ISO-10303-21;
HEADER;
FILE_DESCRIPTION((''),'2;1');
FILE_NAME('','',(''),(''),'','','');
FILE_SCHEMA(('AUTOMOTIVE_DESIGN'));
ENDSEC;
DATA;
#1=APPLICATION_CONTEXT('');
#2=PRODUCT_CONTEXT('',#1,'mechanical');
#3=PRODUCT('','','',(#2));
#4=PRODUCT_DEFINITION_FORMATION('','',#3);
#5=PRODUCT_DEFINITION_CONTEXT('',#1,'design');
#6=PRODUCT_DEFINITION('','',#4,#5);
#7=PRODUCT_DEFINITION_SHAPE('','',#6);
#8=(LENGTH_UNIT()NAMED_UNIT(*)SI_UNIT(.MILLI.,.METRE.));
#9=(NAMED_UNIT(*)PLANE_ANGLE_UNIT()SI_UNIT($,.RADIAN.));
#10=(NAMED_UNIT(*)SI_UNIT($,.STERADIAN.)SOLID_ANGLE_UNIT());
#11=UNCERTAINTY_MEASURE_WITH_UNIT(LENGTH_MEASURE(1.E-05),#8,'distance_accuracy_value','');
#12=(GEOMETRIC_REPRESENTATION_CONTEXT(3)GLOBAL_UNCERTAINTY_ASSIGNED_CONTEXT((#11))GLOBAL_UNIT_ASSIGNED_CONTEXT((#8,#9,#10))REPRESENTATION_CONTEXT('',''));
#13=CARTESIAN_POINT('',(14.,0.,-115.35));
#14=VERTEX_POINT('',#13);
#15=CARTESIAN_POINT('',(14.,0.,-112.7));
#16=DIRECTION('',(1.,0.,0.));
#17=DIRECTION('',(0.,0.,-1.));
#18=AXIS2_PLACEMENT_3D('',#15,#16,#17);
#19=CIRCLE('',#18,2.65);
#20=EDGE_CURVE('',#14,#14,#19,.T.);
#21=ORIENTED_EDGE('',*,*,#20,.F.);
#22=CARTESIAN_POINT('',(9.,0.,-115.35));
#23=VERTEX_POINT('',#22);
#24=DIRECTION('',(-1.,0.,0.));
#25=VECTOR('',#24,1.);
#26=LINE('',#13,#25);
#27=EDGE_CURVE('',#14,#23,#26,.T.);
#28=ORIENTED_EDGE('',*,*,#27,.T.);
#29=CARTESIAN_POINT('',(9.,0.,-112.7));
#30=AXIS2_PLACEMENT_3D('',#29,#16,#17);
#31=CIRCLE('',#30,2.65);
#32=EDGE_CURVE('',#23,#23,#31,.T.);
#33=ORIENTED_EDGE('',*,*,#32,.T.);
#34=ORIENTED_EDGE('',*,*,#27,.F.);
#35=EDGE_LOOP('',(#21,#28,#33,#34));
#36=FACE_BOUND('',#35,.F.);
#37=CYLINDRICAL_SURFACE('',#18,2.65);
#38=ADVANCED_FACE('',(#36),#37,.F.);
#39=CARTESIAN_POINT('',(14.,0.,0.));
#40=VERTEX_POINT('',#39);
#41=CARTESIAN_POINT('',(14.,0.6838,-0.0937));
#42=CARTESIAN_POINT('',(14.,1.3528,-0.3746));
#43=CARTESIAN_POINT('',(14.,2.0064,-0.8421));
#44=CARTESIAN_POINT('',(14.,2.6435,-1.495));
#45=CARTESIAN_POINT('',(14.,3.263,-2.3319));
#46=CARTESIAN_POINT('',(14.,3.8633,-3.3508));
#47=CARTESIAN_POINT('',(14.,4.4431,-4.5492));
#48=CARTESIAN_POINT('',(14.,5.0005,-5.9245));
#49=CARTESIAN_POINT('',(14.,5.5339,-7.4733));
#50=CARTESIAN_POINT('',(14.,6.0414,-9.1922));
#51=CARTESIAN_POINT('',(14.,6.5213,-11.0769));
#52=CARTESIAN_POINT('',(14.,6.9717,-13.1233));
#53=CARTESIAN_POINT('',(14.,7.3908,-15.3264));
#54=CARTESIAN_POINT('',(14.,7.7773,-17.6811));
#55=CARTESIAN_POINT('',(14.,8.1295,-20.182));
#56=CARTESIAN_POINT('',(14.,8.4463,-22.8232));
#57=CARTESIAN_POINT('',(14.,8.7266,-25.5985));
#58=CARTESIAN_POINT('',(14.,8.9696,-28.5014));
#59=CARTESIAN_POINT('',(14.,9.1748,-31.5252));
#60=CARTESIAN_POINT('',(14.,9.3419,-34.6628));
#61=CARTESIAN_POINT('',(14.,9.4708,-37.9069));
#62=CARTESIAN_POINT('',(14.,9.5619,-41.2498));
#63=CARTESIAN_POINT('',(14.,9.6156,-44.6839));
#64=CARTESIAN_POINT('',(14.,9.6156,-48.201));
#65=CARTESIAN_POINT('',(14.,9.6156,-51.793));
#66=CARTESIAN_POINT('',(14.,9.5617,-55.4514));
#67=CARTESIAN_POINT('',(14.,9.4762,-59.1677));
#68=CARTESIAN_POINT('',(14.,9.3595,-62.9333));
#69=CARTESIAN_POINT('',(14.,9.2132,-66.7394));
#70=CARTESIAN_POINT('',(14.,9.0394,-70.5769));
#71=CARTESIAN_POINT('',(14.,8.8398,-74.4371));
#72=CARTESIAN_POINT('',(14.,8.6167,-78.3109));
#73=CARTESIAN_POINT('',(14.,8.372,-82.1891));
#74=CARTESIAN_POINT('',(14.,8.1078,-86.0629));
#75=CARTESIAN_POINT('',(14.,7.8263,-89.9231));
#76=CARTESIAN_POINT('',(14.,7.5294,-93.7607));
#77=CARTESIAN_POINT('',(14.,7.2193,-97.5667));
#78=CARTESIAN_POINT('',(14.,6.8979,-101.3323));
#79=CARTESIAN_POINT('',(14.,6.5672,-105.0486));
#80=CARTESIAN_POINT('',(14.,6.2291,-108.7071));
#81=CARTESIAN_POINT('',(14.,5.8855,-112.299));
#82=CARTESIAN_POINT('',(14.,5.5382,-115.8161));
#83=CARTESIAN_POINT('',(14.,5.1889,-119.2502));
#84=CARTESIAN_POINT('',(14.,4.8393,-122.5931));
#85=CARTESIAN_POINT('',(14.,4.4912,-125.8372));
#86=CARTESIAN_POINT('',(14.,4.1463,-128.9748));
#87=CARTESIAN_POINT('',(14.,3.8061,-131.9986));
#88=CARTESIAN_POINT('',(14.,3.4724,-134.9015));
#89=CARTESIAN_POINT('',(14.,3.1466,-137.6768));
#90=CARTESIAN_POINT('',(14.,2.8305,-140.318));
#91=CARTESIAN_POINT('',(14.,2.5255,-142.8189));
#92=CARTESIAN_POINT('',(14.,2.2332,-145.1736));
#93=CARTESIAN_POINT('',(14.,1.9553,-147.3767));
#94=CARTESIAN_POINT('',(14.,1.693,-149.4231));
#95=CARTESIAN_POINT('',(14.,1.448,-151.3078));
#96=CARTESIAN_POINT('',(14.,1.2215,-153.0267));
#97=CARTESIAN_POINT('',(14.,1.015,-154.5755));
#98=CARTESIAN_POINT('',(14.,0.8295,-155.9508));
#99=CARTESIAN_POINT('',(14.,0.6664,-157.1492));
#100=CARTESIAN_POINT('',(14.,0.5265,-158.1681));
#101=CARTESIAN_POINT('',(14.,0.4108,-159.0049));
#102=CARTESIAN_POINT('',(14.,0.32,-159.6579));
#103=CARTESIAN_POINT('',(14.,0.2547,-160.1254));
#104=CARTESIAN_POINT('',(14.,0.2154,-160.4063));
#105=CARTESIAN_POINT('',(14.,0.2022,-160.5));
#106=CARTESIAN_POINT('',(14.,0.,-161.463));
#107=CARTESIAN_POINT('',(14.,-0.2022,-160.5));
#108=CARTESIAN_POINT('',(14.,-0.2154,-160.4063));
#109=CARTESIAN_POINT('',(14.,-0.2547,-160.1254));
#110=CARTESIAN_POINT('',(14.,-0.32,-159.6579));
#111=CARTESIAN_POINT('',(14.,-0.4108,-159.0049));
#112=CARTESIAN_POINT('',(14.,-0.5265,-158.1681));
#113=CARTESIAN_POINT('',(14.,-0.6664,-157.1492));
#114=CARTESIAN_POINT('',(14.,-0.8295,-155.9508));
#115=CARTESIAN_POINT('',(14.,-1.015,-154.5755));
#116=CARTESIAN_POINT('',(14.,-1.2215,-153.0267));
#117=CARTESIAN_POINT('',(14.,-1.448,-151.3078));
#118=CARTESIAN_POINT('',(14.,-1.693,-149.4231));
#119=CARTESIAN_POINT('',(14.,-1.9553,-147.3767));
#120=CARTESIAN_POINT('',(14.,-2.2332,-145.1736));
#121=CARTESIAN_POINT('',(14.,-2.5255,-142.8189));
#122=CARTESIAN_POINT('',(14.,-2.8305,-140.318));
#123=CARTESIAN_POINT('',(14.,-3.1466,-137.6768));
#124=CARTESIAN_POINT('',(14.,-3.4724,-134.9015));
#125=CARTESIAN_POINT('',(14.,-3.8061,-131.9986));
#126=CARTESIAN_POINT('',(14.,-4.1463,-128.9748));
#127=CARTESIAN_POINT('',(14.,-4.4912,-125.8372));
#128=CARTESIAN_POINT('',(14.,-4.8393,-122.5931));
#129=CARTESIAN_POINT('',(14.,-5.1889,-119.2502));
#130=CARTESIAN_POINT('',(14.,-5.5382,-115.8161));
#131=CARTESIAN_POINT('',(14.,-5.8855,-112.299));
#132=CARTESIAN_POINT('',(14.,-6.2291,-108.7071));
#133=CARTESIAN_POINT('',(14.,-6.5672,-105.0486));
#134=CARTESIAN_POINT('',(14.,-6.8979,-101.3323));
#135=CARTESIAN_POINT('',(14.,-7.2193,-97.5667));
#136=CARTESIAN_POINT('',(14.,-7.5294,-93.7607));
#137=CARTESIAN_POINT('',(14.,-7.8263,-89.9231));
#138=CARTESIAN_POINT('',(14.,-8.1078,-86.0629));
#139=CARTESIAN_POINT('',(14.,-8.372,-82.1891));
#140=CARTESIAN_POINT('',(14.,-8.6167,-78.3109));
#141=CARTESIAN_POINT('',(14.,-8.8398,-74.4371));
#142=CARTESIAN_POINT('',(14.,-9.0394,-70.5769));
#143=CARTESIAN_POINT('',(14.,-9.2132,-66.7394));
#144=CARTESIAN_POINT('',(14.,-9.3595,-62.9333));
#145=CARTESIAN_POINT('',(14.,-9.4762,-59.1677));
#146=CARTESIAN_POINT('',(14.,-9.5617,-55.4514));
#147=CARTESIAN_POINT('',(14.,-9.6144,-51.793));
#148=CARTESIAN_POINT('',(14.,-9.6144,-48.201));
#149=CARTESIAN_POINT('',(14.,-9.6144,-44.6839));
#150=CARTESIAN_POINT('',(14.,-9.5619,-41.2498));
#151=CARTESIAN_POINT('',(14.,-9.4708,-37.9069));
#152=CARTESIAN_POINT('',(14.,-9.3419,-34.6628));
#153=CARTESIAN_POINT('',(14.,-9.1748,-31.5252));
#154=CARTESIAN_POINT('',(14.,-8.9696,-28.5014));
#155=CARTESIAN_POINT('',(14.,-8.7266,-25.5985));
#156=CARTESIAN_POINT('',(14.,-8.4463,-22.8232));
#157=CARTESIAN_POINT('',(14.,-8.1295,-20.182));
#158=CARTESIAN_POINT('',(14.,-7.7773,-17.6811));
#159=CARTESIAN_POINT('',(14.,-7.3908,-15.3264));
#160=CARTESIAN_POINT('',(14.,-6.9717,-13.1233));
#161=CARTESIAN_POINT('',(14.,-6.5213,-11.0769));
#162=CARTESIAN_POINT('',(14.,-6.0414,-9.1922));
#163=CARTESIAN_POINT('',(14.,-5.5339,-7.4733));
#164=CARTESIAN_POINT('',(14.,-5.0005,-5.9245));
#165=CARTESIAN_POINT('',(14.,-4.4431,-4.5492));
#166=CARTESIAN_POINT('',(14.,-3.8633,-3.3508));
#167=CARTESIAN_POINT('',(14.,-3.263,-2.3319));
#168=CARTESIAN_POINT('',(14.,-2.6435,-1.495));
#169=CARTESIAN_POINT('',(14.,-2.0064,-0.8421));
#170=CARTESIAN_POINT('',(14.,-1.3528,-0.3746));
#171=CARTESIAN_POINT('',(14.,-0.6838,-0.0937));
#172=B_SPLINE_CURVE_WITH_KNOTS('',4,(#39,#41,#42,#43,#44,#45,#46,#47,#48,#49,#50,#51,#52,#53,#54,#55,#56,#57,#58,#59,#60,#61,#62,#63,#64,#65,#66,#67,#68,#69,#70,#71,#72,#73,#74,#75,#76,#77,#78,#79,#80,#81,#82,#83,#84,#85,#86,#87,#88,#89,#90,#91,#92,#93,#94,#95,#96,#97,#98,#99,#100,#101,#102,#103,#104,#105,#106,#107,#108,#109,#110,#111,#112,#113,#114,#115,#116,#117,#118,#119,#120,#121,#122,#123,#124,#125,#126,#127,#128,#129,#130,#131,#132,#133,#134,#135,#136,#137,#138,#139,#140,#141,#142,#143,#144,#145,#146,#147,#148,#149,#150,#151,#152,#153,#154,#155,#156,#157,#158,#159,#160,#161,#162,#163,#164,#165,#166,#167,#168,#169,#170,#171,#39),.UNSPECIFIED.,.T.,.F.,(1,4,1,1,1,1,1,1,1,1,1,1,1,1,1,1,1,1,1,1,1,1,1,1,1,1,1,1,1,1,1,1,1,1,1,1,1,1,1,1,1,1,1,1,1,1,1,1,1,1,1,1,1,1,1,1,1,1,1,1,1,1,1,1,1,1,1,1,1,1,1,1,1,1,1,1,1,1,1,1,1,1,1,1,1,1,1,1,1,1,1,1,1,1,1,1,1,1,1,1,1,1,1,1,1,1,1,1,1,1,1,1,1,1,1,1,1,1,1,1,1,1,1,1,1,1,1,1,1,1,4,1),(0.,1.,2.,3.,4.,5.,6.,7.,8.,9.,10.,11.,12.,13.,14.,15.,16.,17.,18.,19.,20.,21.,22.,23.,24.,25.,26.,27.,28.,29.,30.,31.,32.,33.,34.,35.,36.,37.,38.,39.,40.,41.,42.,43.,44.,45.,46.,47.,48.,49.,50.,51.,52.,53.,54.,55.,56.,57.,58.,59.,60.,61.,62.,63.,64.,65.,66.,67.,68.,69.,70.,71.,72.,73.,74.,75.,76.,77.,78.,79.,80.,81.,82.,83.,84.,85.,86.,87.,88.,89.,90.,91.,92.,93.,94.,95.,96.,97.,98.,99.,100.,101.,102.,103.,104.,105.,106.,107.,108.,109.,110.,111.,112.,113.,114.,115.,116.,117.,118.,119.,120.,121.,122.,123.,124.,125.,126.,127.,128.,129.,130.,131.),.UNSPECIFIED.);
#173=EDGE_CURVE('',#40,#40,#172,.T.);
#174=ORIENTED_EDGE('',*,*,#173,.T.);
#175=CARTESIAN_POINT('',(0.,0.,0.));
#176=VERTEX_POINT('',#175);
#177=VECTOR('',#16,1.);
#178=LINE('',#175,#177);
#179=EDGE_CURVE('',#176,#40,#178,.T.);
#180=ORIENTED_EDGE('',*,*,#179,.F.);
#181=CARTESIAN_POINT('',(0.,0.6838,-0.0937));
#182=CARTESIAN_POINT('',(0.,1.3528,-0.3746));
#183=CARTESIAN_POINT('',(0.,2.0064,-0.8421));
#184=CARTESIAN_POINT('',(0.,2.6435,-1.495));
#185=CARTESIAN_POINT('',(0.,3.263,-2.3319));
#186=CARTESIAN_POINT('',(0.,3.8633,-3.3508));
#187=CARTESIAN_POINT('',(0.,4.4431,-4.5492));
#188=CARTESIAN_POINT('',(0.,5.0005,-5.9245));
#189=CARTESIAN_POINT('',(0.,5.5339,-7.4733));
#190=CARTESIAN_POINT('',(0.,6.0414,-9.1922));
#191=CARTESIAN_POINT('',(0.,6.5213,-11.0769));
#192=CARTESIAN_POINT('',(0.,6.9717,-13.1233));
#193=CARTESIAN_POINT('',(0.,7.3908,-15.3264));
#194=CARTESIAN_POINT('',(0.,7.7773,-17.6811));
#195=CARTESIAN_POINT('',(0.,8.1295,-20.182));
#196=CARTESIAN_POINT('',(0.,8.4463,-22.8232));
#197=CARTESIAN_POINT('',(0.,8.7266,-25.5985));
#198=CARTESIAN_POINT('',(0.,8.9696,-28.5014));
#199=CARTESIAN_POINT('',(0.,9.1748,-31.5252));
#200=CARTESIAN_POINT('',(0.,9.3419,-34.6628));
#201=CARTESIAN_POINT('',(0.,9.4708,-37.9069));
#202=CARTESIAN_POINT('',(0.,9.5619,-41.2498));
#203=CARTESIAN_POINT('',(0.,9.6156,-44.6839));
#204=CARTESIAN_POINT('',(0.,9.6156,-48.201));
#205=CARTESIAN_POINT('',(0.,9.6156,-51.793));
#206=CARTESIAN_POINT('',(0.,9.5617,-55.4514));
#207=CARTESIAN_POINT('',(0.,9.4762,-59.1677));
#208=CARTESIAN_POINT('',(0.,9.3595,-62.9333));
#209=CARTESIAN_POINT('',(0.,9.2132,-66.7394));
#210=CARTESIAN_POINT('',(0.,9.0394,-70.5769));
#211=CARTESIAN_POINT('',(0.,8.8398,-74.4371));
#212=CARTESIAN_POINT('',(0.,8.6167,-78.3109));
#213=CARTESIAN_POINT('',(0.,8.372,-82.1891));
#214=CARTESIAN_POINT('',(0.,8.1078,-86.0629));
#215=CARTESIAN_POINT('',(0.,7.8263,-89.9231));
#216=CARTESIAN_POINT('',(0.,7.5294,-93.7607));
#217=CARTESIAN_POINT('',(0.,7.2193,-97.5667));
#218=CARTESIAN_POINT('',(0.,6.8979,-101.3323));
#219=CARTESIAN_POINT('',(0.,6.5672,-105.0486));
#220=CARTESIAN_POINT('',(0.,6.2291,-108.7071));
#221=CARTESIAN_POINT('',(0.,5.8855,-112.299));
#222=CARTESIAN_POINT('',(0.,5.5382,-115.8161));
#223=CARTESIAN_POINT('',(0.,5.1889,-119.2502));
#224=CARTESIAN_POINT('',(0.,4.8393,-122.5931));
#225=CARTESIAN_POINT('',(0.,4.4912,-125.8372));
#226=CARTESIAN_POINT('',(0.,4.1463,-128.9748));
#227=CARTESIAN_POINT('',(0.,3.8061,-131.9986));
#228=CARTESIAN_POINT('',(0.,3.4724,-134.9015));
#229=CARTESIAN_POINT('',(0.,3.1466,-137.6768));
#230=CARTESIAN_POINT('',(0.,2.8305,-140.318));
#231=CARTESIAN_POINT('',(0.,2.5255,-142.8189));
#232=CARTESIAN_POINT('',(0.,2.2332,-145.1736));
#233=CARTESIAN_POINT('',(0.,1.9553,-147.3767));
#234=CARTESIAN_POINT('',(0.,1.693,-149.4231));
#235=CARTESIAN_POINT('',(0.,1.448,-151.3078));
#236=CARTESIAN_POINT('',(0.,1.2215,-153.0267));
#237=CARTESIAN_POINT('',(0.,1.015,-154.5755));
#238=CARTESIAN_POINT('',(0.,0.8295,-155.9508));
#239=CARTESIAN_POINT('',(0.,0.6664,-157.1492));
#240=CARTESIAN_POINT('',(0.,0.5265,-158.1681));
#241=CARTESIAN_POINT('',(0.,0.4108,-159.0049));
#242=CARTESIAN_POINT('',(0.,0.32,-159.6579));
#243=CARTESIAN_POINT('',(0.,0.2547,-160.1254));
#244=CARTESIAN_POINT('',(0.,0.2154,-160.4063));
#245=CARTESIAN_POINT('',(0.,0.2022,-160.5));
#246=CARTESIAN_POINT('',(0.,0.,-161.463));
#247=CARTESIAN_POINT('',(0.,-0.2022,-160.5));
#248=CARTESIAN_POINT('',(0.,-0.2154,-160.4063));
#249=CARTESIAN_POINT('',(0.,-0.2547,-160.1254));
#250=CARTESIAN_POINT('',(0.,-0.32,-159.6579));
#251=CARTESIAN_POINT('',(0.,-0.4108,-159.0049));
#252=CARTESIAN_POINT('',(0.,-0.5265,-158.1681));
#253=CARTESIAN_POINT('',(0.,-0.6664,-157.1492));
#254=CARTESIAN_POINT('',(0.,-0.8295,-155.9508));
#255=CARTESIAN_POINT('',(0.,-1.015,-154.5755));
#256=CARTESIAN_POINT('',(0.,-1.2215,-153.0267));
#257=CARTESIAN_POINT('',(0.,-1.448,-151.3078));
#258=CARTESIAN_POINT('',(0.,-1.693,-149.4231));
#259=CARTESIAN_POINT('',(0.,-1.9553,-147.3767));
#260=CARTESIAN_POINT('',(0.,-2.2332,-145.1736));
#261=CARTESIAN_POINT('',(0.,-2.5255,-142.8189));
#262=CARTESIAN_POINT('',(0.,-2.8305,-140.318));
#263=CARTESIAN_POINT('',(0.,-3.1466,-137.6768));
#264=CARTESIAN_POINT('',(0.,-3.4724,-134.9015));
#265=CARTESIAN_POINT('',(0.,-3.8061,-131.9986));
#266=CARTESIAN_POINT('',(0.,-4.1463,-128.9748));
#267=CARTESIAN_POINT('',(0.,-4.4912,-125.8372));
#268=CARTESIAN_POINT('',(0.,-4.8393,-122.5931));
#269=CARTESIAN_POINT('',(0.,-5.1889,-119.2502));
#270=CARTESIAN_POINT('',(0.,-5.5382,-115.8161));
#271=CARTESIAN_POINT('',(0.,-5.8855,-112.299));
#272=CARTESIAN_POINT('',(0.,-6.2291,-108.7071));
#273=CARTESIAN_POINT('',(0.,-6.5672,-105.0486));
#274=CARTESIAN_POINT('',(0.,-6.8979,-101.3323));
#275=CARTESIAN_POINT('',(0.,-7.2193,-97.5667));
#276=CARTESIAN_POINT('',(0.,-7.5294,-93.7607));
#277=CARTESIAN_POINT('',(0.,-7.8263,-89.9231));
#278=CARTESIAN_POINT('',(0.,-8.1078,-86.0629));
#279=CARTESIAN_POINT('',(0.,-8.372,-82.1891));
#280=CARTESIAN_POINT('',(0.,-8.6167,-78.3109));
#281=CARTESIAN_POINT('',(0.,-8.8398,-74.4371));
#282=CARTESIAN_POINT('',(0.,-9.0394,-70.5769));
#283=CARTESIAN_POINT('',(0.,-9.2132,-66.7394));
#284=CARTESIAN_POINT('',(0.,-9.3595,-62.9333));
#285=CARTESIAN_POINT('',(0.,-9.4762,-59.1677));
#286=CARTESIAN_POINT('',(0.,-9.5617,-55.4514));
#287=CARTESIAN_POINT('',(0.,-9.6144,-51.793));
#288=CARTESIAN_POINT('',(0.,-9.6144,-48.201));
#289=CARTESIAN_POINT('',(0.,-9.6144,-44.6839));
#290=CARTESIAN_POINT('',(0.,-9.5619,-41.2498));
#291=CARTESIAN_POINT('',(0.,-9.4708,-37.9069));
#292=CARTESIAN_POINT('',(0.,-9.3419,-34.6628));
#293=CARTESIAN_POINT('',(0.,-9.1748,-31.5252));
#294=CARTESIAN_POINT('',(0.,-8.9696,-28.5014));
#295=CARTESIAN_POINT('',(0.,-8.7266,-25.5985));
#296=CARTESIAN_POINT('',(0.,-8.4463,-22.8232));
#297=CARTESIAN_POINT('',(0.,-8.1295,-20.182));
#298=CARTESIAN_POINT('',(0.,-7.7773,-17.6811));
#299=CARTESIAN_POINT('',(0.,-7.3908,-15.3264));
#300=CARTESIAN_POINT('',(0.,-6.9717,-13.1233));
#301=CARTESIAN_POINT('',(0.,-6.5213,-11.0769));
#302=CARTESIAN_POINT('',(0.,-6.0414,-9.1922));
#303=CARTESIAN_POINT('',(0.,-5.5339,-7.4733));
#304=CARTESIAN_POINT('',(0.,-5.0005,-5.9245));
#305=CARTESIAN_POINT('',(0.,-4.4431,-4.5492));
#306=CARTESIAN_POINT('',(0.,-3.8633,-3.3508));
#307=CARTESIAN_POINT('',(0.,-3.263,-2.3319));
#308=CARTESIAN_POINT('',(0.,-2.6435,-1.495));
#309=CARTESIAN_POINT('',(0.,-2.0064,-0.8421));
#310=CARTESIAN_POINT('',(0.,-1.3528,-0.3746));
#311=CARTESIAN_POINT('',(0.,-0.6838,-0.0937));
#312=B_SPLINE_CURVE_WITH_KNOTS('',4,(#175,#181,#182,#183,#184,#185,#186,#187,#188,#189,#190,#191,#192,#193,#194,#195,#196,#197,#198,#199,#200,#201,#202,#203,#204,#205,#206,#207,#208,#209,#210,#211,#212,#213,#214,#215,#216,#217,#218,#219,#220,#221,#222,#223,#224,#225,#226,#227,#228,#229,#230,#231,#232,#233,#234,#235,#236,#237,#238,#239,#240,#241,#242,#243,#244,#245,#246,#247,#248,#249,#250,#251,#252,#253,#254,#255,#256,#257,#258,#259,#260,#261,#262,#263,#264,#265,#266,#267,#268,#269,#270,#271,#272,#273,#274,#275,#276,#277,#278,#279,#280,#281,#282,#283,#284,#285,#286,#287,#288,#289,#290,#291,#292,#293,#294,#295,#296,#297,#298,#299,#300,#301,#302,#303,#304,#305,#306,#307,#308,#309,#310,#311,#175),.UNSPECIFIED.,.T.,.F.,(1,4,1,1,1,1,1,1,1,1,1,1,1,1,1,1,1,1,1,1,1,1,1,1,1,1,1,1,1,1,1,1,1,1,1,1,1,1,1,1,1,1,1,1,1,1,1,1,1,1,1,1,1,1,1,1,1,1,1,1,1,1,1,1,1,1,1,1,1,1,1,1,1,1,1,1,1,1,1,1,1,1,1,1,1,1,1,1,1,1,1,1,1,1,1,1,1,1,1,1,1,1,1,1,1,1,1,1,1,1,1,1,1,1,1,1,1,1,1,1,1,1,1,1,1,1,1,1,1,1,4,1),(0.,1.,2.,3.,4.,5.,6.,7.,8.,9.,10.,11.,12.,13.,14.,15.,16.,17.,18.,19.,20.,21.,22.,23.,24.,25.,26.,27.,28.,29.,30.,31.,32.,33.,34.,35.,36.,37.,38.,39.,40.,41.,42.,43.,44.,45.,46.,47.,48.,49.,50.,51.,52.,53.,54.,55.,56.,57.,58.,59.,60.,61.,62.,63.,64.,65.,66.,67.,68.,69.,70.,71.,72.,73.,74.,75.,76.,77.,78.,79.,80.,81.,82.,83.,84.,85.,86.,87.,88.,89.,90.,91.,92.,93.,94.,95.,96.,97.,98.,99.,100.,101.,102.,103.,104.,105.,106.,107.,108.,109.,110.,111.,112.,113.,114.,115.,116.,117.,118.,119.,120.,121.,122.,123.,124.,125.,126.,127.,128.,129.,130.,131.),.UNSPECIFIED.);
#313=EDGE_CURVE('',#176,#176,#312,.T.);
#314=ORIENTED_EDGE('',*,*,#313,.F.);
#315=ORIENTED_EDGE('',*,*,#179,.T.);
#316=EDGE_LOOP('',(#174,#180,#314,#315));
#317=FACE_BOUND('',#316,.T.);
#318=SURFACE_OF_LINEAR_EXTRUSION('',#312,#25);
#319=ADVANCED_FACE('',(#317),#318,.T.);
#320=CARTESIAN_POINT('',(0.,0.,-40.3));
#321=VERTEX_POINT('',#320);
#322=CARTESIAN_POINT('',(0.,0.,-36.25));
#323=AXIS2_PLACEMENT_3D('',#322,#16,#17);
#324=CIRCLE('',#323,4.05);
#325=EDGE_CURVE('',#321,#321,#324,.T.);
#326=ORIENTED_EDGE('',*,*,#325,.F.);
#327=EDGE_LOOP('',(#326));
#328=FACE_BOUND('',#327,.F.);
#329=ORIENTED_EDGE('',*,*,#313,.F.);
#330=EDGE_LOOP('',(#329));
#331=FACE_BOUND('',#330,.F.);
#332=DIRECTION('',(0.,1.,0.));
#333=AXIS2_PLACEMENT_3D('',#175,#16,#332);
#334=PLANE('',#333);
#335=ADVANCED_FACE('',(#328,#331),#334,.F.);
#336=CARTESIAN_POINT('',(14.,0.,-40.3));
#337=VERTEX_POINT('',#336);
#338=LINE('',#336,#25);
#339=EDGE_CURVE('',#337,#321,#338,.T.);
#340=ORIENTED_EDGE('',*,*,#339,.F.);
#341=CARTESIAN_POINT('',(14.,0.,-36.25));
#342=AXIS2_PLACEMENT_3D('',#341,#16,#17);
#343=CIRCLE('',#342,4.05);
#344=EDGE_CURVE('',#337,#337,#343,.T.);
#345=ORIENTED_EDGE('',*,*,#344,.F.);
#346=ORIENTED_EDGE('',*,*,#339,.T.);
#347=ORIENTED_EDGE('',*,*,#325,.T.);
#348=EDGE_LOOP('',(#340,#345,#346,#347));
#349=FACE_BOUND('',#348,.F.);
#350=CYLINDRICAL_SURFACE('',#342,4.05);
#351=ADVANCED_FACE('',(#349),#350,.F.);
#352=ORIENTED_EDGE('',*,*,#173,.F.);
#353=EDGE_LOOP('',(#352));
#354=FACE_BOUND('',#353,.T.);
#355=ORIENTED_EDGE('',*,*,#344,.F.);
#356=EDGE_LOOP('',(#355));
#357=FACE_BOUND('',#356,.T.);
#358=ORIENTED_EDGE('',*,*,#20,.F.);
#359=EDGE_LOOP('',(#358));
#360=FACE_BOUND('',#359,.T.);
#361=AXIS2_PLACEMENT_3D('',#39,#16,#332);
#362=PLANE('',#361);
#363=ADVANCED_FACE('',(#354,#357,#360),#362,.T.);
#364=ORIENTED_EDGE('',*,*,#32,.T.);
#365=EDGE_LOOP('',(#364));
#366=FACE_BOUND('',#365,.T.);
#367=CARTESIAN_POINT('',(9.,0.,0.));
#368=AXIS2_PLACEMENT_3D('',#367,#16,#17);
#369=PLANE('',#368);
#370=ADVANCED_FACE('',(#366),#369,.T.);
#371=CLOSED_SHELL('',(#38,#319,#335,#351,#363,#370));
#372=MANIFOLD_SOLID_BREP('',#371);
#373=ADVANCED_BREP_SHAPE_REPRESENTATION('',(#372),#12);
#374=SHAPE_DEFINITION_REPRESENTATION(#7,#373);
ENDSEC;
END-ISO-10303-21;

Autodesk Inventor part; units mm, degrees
ref_plane "YZ Plane" through (0, 0, 0) normal (1, 0, 0) x (0, 1, 0)
ref_plane "XZ Plane" through (0, 0, 0) normal (0, 1, 0) x (-1, 0, 0)
ref_plane "XY Plane" through (0, 0, 0) normal (0, 0, 1) x (1, 0, 0)
sketch "Sketch9" plane through (0, 0, 0) normal (1, 0, 0) x (0, 1, 0)
  line L0 (0, 0) -> (0.6838, -0.0937) construction
  line L1 (0.6838, -0.0937) -> (1.3528, -0.3746) construction
  line L2 (1.3528, -0.3746) -> (2.0064, -0.8421) construction
  line L3 (2.0064, -0.8421) -> (2.6435, -1.495) construction
  line L4 (2.6435, -1.495) -> (3.263, -2.3319) construction
  line L5 (3.263, -2.3319) -> (3.8633, -3.3508) construction
  line L6 (3.8633, -3.3508) -> (4.4431, -4.5492) construction
  line L7 (4.4431, -4.5492) -> (5.0005, -5.9245) construction
  line L8 (5.0005, -5.9245) -> (5.5339, -7.4733) construction
  line L9 (5.5339, -7.4733) -> (6.0414, -9.1922) construction
  line L10 (6.0414, -9.1922) -> (6.5213, -11.0769) construction
  line L11 (6.5213, -11.0769) -> (6.9717, -13.1233) construction
  line L12 (6.9717, -13.1233) -> (7.3908, -15.3264) construction
  line L13 (7.3908, -15.3264) -> (7.7773, -17.6811) construction
  line L14 (7.7773, -17.6811) -> (8.1295, -20.182) construction
  line L15 (8.1295, -20.182) -> (8.4463, -22.8232) construction
  line L16 (8.4463, -22.8232) -> (8.7266, -25.5985) construction
  line L17 (8.7266, -25.5985) -> (8.9696, -28.5014) construction
  line L18 (8.9696, -28.5014) -> (9.1748, -31.5252) construction
  line L19 (9.1748, -31.5252) -> (9.3419, -34.6628) construction
  line L20 (9.3419, -34.6628) -> (9.4708, -37.9069) construction
  line L21 (9.4708, -37.9069) -> (9.5619, -41.2498) construction
  line L22 (9.5619, -41.2498) -> (9.6156, -44.6839) construction
  line L23 (9.6156, -44.6839) -> (9.6156, -48.201) construction
  line L24 (9.6156, -48.201) -> (9.6156, -51.793) construction
  line L25 (9.6156, -51.793) -> (9.5617, -55.4514) construction
  line L26 (9.5617, -55.4514) -> (9.4762, -59.1677) construction
  line L27 (9.4762, -59.1677) -> (9.3595, -62.9333) construction
  line L28 (9.3595, -62.9333) -> (9.2132, -66.7394) construction
  line L29 (9.2132, -66.7394) -> (9.0394, -70.5769) construction
  line L30 (9.0394, -70.5769) -> (8.8398, -74.4371) construction
  line L31 (8.8398, -74.4371) -> (8.6167, -78.3109) construction
  line L32 (8.6167, -78.3109) -> (8.372, -82.1891) construction
  line L33 (8.372, -82.1891) -> (8.1078, -86.0629) construction
  line L34 (8.1078, -86.0629) -> (7.8263, -89.9231) construction
  line L35 (7.8263, -89.9231) -> (7.5294, -93.7607) construction
  line L36 (7.5294, -93.7607) -> (7.2193, -97.5667) construction
  line L37 (7.2193, -97.5667) -> (6.8979, -101.3323) construction
  line L38 (6.8979, -101.3323) -> (6.5672, -105.0486) construction
  line L39 (6.5672, -105.0486) -> (6.2291, -108.7071) construction
  line L40 (6.2291, -108.7071) -> (5.8855, -112.299) construction
  line L41 (5.8855, -112.299) -> (5.5382, -115.8161) construction
  line L42 (5.5382, -115.8161) -> (5.1889, -119.2502) construction
  line L43 (5.1889, -119.2502) -> (4.8393, -122.5931) construction
  line L44 (4.8393, -122.5931) -> (4.4912, -125.8372) construction
  line L45 (4.4912, -125.8372) -> (4.1463, -128.9748) construction
  line L46 (4.1463, -128.9748) -> (3.8061, -131.9986) construction
  line L47 (3.8061, -131.9986) -> (3.4724, -134.9015) construction
  line L48 (3.4724, -134.9015) -> (3.1466, -137.6768) construction
  line L49 (3.1466, -137.6768) -> (2.8305, -140.318) construction
  line L50 (2.8305, -140.318) -> (2.5255, -142.8189) construction
  line L51 (2.5255, -142.8189) -> (2.2332, -145.1736) construction
  line L52 (2.2332, -145.1736) -> (1.9553, -147.3767) construction
  line L53 (1.9553, -147.3767) -> (1.693, -149.4231) construction
  line L54 (1.693, -149.4231) -> (1.448, -151.3078) construction
  line L55 (1.448, -151.3078) -> (1.2215, -153.0267) construction
  line L56 (1.2215, -153.0267) -> (1.015, -154.5755) construction
  line L57 (1.015, -154.5755) -> (0.8295, -155.9508) construction
  line L58 (0.8295, -155.9508) -> (0.6664, -157.1492) construction
  line L59 (0.6664, -157.1492) -> (0.5265, -158.1681) construction
  line L60 (0.5265, -158.1681) -> (0.4108, -159.0049) construction
  line L61 (0.4108, -159.0049) -> (0.32, -159.6579) construction
  line L62 (0.32, -159.6579) -> (0.2547, -160.1254) construction
  line L63 (0.2547, -160.1254) -> (0.2154, -160.4063) construction
  line L64 (0.2154, -160.4063) -> (0.2022, -160.5) construction
  line L65 (0.2022, -160.5) -> (0, -161.463) construction
  line L66 (0, -161.463) -> (-0.2022, -160.5) construction
  line L67 (-0.2022, -160.5) -> (-0.2154, -160.4063) construction
  line L68 (-0.2154, -160.4063) -> (-0.2547, -160.1254) construction
  line L69 (-0.2547, -160.1254) -> (-0.32, -159.6579) construction
  line L70 (-0.32, -159.6579) -> (-0.4108, -159.0049) construction
  line L71 (-0.4108, -159.0049) -> (-0.5265, -158.1681) construction
  line L72 (-0.5265, -158.1681) -> (-0.6664, -157.1492) construction
  line L73 (-0.6664, -157.1492) -> (-0.8295, -155.9508) construction
  line L74 (-0.8295, -155.9508) -> (-1.015, -154.5755) construction
  line L75 (-1.015, -154.5755) -> (-1.2215, -153.0267) construction
  line L76 (-1.2215, -153.0267) -> (-1.448, -151.3078) construction
  line L77 (-1.448, -151.3078) -> (-1.693, -149.4231) construction
  line L78 (-1.693, -149.4231) -> (-1.9553, -147.3767) construction
  line L79 (-1.9553, -147.3767) -> (-2.2332, -145.1736) construction
  line L80 (-2.2332, -145.1736) -> (-2.5255, -142.8189) construction
  line L81 (-2.5255, -142.8189) -> (-2.8305, -140.318) construction
  line L82 (-2.8305, -140.318) -> (-3.1466, -137.6768) construction
  line L83 (-3.1466, -137.6768) -> (-3.4724, -134.9015) construction
  line L84 (-3.4724, -134.9015) -> (-3.8061, -131.9986) construction
  line L85 (-3.8061, -131.9986) -> (-4.1463, -128.9748) construction
  line L86 (-4.1463, -128.9748) -> (-4.4912, -125.8372) construction
  line L87 (-4.4912, -125.8372) -> (-4.8393, -122.5931) construction
  line L88 (-4.8393, -122.5931) -> (-5.1889, -119.2502) construction
  line L89 (-5.1889, -119.2502) -> (-5.5382, -115.8161) construction
  line L90 (-5.5382, -115.8161) -> (-5.8855, -112.299) construction
  line L91 (-5.8855, -112.299) -> (-6.2291, -108.7071) construction
  line L92 (-6.2291, -108.7071) -> (-6.5672, -105.0486) construction
  line L93 (-6.5672, -105.0486) -> (-6.8979, -101.3323) construction
  line L94 (-6.8979, -101.3323) -> (-7.2193, -97.5667) construction
  line L95 (-7.2193, -97.5667) -> (-7.5294, -93.7607) construction
  line L96 (-7.5294, -93.7607) -> (-7.8263, -89.9231) construction
  line L97 (-7.8263, -89.9231) -> (-8.1078, -86.0629) construction
  line L98 (-8.1078, -86.0629) -> (-8.372, -82.1891) construction
  line L99 (-8.372, -82.1891) -> (-8.6167, -78.3109) construction
  line L100 (-8.6167, -78.3109) -> (-8.8398, -74.4371) construction
  line L101 (-8.8398, -74.4371) -> (-9.0394, -70.5769) construction
  line L102 (-9.0394, -70.5769) -> (-9.2132, -66.7394) construction
  line L103 (-9.2132, -66.7394) -> (-9.3595, -62.9333) construction
  line L104 (-9.3595, -62.9333) -> (-9.4762, -59.1677) construction
  line L105 (-9.4762, -59.1677) -> (-9.5617, -55.4514) construction
  line L106 (-9.5617, -55.4514) -> (-9.6144, -51.793) construction
  line L107 (-9.6144, -51.793) -> (-9.6144, -48.201) construction
  line L108 (-9.6144, -48.201) -> (-9.6144, -44.6839) construction
  line L109 (-9.6144, -44.6839) -> (-9.5619, -41.2498) construction
  line L110 (-9.5619, -41.2498) -> (-9.4708, -37.9069) construction
  line L111 (-9.4708, -37.9069) -> (-9.3419, -34.6628) construction
  line L112 (-9.3419, -34.6628) -> (-9.1748, -31.5252) construction
  line L113 (-9.1748, -31.5252) -> (-8.9696, -28.5014) construction
  line L114 (-8.9696, -28.5014) -> (-8.7266, -25.5985) construction
  line L115 (-8.7266, -25.5985) -> (-8.4463, -22.8232) construction
  line L116 (-8.4463, -22.8232) -> (-8.1295, -20.182) construction
  line L117 (-8.1295, -20.182) -> (-7.7773, -17.6811) construction
  line L118 (-7.7773, -17.6811) -> (-7.3908, -15.3264) construction
  line L119 (-7.3908, -15.3264) -> (-6.9717, -13.1233) construction
  line L120 (-6.9717, -13.1233) -> (-6.5213, -11.0769) construction
  line L121 (-6.5213, -11.0769) -> (-6.0414, -9.1922) construction
  line L122 (-6.0414, -9.1922) -> (-5.5339, -7.4733) construction
  line L123 (-5.5339, -7.4733) -> (-5.0005, -5.9245) construction
  line L124 (-5.0005, -5.9245) -> (-4.4431, -4.5492) construction
  line L125 (-4.4431, -4.5492) -> (-3.8633, -3.3508) construction
  line L126 (-3.8633, -3.3508) -> (-3.263, -2.3319) construction
  line L127 (-3.263, -2.3319) -> (-2.6435, -1.495) construction
  line L128 (-2.6435, -1.495) -> (-2.0064, -0.8421) construction
  line L129 (-2.0064, -0.8421) -> (-1.3528, -0.3746) construction
  line L130 (-1.3528, -0.3746) -> (-0.6838, -0.0937) construction
  line L131 (-0.6838, -0.0937) -> (0, 0) construction
  spline S0 degree 4 poles (0, 0) (0.6838, -0.0937) (1.3528, -0.3746) (2.0064, -0.8421) (2.6435, -1.495) (3.263, -2.3319) (3.8633, -3.3508) (4.4431, -4.5492) (5.0005, -5.9245) (5.5339, -7.4733) (6.0414, -9.1922) (6.5213, -11.0769) (6.9717, -13.1233) (7.3908, -15.3264) (7.7773, -17.6811) (8.1295, -20.182) (8.4463, -22.8232) (8.7266, -25.5985) (8.9696, -28.5014) (9.1748, -31.5252) (9.3419, -34.6628) (9.4708, -37.9069) (9.5619, -41.2498) (9.6156, -44.6839) (9.6156, -48.201) (9.6156, -51.793) (9.5617, -55.4514) (9.4762, -59.1677) (9.3595, -62.9333) (9.2132, -66.7394) (9.0394, -70.5769) (8.8398, -74.4371) (8.6167, -78.3109) (8.372, -82.1891) (8.1078, -86.0629) (7.8263, -89.9231) (7.5294, -93.7607) (7.2193, -97.5667) (6.8979, -101.3323) (6.5672, -105.0486) (6.2291, -108.7071) (5.8855, -112.299) (5.5382, -115.8161) (5.1889, -119.2502) (4.8393, -122.5931) (4.4912, -125.8372) (4.1463, -128.9748) (3.8061, -131.9986) (3.4724, -134.9015) (3.1466, -137.6768) (2.8305, -140.318) (2.5255, -142.8189) (2.2332, -145.1736) (1.9553, -147.3767) (1.693, -149.4231) (1.448, -151.3078) (1.2215, -153.0267) (1.015, -154.5755) (0.8295, -155.9508) (0.6664, -157.1492) (0.5265, -158.1681) (0.4108, -159.0049) (0.32, -159.6579) (0.2547, -160.1254) (0.2154, -160.4063) (0.2022, -160.5) (0, -161.463) (-0.2022, -160.5) (-0.2154, -160.4063) (-0.2547, -160.1254) (-0.32, -159.6579) (-0.4108, -159.0049) (-0.5265, -158.1681) (-0.6664, -157.1492) (-0.8295, -155.9508) (-1.015, -154.5755) (-1.2215, -153.0267) (-1.448, -151.3078) (-1.693, -149.4231) (-1.9553, -147.3767) (-2.2332, -145.1736) (-2.5255, -142.8189) (-2.8305, -140.318) (-3.1466, -137.6768) (-3.4724, -134.9015) (-3.8061, -131.9986) (-4.1463, -128.9748) (-4.4912, -125.8372) (-4.8393, -122.5931) (-5.1889, -119.2502) (-5.5382, -115.8161) (-5.8855, -112.299) (-6.2291, -108.7071) (-6.5672, -105.0486) (-6.8979, -101.3323) (-7.2193, -97.5667) (-7.5294, -93.7607) (-7.8263, -89.9231) (-8.1078, -86.0629) (-8.372, -82.1891) (-8.6167, -78.3109) (-8.8398, -74.4371) (-9.0394, -70.5769) (-9.2132, -66.7394) (-9.3595, -62.9333) (-9.4762, -59.1677) (-9.5617, -55.4514) (-9.6144, -51.793) (-9.6144, -48.201) (-9.6144, -44.6839) (-9.5619, -41.2498) (-9.4708, -37.9069) (-9.3419, -34.6628) (-9.1748, -31.5252) (-8.9696, -28.5014) (-8.7266, -25.5985) (-8.4463, -22.8232) (-8.1295, -20.182) (-7.7773, -17.6811) (-7.3908, -15.3264) (-6.9717, -13.1233) (-6.5213, -11.0769) (-6.0414, -9.1922) (-5.5339, -7.4733) (-5.0005, -5.9245) (-4.4431, -4.5492) (-3.8633, -3.3508) (-3.263, -2.3319) (-2.6435, -1.495) (-2.0064, -0.8421) (-1.3528, -0.3746) (-0.6838, -0.0937) (0, 0) knots 1 1 1 1 1 2 3 4 5 6 7 8 9 10 11 12 13 14 15 16 17 18 19 20 21 22 23 24 25 26 27 28 29 30 31 32 33 34 35 36 37 38 39 40 41 42 43 44 45 46 47 48 49 50 51 52 53 54 55 56 57 58 59 60 61 62 63 64 65 66 67 68 69 70 71 72 73 74 75 76 77 78 79 80 81 82 83 84 85 86 87 88 89 90 91 92 93 94 95 96 97 98 99 100 101 102 103 104 105 106 107 108 109 110 111 112 113 114 115 116 117 118 119 120 121 122 123 124 125 126 127 128 129 130 130 130 130 130
extrude "Extrusion3" add sketch "Sketch9" along normal blind 14
sketch "Sketch10" plane through (14, 0, 0) normal (1, 0, 0) x (0, 0, -1)
  circle A0 centre (36.25, 0) radius 4.05
  point P0 (0, 0)
  dimension "d88" = 8.1
  dimension "d89" = 36.25
extrude "Extrusion4" cut sketch "Sketch10" against normal blind 15
sketch "Sketch11" plane through (14, 0, 0) normal (1, 0, 0) x (0, 0, -1)
  circle A0 centre (112.7, 0) radius 2.65
  point P0 (0, 0)
  dimension "d93" = 5.3
  dimension "d94" = 112.7
extrude "Extrusion5" cut sketch "Sketch11" against normal blind 5
properties part number "6P-009" material "Poplar"
